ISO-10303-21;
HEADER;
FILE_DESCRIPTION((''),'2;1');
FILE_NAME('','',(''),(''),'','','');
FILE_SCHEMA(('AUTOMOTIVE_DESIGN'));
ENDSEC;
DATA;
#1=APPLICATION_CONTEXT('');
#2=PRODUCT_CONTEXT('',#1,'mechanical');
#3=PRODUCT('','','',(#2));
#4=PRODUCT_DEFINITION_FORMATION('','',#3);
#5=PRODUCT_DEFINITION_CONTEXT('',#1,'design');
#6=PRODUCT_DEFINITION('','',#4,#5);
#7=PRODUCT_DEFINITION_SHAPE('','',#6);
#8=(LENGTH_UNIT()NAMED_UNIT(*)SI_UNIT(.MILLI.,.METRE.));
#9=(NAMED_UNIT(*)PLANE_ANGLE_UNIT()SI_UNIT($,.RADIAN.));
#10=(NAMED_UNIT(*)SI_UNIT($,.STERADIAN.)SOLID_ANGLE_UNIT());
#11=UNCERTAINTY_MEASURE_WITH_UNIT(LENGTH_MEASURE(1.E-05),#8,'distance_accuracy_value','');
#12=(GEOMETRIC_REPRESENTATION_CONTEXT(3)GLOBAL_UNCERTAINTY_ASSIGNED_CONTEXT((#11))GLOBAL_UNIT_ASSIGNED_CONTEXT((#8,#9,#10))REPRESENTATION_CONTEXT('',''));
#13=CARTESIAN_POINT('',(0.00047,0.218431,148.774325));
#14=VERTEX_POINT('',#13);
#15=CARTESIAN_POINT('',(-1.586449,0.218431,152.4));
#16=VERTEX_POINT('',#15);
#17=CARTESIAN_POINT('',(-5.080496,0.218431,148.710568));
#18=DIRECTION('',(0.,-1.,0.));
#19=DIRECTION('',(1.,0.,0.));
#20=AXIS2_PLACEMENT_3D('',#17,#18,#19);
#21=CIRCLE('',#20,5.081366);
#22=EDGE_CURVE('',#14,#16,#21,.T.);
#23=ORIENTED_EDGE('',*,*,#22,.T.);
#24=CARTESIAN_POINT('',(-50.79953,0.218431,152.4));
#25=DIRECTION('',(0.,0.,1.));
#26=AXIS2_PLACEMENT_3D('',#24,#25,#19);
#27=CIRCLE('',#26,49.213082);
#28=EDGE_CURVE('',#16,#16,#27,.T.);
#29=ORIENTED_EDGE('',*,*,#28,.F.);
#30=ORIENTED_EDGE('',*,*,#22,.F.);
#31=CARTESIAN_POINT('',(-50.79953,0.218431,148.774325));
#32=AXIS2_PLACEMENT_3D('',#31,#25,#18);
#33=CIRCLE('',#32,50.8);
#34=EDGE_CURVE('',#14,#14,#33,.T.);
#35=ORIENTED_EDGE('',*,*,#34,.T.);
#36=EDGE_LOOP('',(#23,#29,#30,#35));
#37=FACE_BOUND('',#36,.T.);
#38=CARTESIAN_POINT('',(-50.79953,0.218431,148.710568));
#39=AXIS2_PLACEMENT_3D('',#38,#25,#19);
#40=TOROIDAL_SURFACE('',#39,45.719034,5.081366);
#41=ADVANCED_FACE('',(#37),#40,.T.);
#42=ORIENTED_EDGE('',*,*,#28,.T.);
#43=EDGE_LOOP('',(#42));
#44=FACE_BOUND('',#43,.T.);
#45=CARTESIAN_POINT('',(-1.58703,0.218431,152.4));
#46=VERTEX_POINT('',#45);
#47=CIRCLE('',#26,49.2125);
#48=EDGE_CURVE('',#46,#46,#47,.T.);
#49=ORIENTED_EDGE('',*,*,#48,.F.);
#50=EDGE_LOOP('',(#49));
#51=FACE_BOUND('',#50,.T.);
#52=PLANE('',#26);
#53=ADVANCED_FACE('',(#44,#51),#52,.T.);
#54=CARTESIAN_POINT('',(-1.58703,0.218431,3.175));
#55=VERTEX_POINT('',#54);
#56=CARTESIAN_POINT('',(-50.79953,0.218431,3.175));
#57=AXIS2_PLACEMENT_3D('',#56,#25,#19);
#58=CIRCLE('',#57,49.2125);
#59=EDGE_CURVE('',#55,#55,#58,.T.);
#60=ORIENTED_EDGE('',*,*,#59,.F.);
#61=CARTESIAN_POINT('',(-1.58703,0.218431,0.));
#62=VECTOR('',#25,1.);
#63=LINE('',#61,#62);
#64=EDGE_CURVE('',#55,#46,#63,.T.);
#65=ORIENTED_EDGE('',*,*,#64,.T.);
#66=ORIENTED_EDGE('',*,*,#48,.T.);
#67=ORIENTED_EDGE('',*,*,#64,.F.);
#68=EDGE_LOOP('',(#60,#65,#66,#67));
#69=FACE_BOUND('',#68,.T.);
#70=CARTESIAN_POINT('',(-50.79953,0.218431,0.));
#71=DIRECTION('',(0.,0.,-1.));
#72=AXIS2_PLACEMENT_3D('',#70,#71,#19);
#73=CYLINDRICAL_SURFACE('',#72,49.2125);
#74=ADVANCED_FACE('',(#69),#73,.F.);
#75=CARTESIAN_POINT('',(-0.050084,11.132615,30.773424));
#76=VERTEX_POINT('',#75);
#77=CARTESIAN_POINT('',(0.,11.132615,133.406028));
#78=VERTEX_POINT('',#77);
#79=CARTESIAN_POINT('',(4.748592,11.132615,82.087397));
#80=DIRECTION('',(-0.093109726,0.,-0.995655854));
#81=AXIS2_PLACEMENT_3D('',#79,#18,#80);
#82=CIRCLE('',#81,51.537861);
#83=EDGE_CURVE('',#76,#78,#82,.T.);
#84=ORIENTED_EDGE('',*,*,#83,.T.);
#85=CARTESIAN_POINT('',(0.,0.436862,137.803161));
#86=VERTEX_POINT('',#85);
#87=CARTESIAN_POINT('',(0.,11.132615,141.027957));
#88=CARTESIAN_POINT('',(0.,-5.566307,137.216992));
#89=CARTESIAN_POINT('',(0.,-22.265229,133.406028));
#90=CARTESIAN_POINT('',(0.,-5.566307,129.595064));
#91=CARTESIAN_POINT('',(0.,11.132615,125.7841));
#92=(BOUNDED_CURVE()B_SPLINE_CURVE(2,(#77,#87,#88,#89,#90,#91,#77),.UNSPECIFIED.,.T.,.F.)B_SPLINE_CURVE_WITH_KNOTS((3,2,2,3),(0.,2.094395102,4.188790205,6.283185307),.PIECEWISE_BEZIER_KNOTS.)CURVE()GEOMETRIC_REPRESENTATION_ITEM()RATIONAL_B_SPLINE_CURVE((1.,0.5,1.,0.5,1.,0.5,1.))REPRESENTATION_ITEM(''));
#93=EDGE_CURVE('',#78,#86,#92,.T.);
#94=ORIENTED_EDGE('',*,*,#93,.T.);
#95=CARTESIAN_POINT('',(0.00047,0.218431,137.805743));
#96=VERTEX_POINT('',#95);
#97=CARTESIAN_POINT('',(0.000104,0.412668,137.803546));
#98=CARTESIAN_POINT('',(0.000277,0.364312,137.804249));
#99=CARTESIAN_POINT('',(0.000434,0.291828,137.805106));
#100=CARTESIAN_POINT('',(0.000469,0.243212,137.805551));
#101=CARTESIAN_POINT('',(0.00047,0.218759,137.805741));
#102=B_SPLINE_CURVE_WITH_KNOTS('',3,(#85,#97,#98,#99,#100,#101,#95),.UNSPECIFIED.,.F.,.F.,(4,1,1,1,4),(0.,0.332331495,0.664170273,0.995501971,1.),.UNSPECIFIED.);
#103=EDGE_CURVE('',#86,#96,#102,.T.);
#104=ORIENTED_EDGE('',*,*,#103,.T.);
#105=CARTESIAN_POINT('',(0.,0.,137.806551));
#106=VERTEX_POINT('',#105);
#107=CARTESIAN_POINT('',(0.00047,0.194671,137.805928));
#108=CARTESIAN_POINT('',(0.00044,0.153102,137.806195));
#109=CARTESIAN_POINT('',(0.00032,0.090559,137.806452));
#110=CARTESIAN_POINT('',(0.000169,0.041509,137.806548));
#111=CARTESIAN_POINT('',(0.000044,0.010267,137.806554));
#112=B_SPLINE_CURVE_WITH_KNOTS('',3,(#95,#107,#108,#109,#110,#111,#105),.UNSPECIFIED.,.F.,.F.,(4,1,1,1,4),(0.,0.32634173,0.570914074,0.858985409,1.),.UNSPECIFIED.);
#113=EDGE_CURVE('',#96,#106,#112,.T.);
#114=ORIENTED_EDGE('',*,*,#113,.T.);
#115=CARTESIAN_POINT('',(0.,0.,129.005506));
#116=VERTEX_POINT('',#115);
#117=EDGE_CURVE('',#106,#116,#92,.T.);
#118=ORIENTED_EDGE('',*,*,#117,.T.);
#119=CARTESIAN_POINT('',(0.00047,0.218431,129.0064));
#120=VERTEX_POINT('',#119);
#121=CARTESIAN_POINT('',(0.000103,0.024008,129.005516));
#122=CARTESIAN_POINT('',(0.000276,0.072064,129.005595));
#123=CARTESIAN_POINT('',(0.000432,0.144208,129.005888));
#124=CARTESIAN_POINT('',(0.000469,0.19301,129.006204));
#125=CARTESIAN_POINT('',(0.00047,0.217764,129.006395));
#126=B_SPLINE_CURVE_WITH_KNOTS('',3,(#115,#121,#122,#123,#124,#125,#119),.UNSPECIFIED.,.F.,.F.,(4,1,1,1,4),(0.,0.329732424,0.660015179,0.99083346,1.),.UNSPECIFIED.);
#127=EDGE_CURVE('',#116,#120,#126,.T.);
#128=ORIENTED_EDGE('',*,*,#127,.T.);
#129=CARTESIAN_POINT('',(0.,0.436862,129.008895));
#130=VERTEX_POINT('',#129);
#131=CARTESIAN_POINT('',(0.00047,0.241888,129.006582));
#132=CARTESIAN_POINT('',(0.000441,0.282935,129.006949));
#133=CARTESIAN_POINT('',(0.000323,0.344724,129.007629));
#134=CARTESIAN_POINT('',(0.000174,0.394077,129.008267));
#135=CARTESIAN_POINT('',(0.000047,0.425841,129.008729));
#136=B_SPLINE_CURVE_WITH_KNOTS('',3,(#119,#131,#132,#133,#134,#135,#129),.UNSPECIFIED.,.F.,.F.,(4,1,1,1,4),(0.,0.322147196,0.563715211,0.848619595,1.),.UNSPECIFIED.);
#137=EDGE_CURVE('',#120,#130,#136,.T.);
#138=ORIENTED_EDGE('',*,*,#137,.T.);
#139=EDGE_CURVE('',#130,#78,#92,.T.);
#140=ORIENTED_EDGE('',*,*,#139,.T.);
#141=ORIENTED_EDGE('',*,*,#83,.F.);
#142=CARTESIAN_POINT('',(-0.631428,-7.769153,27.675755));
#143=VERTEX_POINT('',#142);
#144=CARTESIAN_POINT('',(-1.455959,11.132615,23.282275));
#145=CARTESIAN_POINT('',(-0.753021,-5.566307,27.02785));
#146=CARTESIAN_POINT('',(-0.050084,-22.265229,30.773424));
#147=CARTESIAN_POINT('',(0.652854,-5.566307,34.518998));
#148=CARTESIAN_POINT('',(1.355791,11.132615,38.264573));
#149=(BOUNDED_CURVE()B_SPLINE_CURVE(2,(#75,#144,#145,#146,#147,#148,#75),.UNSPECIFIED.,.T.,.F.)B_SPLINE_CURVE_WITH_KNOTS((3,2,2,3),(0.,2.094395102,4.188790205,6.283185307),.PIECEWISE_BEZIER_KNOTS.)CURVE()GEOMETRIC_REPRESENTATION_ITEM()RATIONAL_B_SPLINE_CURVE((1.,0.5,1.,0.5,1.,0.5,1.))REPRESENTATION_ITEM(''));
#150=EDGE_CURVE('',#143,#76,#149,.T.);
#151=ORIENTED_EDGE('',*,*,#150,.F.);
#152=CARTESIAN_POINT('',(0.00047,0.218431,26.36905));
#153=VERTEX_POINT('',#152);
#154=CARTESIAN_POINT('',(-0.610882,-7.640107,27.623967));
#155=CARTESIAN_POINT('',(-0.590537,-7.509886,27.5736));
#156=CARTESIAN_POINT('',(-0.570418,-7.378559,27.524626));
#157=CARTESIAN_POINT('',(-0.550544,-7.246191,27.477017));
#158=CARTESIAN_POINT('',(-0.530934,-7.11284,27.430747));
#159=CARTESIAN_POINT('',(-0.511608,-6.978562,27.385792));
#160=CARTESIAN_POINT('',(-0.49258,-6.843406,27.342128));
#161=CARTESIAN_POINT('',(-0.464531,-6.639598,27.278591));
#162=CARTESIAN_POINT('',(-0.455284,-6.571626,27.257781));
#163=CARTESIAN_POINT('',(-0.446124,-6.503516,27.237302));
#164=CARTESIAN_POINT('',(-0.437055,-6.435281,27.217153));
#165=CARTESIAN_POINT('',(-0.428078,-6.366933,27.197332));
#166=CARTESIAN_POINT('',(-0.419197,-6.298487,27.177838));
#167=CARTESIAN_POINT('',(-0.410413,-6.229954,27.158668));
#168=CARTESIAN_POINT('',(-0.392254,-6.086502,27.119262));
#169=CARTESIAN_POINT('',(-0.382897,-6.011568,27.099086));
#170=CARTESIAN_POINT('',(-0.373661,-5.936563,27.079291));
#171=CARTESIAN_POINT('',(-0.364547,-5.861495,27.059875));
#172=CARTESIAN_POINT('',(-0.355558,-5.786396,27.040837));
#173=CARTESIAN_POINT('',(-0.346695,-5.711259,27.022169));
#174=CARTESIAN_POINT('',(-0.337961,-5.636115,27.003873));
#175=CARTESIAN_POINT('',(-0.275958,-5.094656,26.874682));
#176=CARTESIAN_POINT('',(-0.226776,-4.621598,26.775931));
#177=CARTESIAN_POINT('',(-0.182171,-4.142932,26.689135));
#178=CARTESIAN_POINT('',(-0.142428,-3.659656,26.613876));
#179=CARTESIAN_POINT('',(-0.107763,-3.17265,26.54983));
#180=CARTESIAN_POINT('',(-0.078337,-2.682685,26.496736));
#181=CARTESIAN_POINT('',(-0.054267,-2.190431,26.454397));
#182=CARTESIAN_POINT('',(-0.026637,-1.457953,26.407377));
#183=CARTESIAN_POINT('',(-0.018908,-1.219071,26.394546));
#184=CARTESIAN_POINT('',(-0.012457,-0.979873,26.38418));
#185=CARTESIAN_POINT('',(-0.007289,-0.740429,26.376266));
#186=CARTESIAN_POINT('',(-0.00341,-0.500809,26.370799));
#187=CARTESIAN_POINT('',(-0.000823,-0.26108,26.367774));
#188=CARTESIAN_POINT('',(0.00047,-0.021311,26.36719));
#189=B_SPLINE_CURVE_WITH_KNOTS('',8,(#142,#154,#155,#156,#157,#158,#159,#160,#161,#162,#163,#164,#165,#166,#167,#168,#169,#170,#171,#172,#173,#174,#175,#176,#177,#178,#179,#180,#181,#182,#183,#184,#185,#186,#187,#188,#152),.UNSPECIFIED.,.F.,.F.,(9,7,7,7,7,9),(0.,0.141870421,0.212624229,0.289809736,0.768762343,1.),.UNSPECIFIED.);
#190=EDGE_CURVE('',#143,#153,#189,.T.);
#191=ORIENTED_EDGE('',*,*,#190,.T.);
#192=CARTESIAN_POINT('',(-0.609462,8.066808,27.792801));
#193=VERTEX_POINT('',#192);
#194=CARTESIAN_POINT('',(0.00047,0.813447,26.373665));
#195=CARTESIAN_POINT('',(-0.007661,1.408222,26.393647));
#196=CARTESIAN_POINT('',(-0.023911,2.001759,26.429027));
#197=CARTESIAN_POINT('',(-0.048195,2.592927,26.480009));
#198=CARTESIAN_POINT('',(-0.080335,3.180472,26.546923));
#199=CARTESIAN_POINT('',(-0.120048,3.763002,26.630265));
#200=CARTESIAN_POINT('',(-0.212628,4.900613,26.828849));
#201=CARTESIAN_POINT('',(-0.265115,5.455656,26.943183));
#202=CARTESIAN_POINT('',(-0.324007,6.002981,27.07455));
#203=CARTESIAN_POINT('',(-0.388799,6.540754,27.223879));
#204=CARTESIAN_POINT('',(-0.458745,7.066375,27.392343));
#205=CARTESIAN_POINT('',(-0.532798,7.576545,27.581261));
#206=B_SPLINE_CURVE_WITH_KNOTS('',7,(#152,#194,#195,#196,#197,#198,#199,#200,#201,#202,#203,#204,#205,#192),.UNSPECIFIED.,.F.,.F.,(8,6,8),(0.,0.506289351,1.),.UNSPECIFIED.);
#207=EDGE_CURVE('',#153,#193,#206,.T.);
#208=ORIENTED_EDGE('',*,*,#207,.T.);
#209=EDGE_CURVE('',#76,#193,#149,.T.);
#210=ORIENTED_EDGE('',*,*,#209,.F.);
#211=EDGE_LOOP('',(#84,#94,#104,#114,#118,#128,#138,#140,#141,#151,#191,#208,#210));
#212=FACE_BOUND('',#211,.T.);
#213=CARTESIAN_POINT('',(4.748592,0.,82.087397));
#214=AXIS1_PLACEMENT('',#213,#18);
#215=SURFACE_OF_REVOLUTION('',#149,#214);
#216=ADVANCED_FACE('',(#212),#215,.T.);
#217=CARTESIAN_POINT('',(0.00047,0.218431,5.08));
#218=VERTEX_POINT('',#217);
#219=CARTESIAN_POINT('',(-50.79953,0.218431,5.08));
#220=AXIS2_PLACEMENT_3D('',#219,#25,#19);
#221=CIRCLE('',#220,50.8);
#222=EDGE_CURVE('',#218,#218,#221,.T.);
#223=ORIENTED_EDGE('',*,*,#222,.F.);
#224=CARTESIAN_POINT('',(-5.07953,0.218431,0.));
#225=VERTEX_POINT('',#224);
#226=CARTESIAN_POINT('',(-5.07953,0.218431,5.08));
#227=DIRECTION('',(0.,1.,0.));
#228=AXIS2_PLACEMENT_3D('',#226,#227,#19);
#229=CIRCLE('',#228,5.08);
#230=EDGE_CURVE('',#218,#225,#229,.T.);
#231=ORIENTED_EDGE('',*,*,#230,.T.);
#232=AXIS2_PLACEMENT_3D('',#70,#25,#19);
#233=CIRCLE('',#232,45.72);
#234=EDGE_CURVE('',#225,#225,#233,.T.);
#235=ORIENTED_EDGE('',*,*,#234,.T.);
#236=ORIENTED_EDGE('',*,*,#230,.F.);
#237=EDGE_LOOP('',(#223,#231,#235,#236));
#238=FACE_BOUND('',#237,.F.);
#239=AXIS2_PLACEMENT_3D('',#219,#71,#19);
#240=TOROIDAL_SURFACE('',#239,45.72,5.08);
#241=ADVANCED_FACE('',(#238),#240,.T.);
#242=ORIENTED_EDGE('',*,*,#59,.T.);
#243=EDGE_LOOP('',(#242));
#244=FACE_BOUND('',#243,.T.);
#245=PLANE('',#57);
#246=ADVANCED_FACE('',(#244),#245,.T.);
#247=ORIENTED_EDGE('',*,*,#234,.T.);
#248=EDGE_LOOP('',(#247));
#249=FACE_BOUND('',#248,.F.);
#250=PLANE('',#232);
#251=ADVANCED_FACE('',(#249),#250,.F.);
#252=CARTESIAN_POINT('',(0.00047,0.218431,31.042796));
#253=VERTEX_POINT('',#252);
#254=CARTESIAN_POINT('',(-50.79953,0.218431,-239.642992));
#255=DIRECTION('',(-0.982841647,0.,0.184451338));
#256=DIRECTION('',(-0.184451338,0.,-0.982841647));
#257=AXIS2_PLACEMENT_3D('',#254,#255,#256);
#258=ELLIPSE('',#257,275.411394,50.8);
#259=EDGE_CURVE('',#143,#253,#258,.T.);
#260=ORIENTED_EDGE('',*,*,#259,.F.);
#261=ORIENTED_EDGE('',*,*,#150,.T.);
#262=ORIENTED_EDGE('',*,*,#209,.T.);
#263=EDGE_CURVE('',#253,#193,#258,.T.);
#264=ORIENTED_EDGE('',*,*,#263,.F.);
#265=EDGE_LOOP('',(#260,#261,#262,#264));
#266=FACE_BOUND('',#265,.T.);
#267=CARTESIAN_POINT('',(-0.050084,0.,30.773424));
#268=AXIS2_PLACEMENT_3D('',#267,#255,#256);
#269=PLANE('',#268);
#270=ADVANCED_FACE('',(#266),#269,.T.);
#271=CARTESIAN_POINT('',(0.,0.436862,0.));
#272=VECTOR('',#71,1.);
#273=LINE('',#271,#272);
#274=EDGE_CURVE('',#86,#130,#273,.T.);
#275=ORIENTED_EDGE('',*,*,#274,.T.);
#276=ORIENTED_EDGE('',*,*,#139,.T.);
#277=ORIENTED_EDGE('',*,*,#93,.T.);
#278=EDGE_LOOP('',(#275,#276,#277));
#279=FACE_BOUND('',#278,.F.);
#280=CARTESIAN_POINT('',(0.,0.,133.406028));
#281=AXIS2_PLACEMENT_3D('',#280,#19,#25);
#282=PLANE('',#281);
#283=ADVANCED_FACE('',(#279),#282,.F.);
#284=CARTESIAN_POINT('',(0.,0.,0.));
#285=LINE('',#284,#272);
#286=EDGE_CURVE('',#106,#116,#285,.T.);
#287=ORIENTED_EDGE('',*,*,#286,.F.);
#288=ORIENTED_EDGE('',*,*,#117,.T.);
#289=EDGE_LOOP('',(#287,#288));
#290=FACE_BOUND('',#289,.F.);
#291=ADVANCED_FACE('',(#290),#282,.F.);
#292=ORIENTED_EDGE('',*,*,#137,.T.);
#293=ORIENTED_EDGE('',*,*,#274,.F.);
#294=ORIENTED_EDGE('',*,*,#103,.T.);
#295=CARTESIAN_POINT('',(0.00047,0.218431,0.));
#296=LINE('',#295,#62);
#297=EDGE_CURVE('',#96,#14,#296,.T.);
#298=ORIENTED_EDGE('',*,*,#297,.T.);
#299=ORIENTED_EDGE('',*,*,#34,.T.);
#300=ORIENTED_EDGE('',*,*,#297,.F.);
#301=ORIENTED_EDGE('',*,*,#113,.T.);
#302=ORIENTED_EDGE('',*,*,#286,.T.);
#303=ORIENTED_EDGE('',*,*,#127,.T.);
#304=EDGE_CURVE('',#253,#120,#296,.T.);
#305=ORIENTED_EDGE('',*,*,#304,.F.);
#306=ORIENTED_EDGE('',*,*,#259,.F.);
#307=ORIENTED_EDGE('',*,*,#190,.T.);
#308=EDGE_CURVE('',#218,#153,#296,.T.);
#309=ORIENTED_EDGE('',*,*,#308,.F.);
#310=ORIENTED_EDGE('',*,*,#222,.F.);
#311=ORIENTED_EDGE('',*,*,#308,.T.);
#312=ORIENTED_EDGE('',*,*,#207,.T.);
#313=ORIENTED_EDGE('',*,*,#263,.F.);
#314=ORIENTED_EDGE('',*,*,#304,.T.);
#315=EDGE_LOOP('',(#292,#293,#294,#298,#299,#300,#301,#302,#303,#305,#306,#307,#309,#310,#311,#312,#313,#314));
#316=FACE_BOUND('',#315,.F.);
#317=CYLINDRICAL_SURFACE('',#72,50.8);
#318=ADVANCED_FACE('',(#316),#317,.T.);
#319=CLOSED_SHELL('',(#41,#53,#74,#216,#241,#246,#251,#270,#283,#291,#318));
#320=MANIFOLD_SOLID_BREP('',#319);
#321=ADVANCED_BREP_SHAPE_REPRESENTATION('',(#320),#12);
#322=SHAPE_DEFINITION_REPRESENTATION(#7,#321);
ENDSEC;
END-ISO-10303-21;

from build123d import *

# Parameters (mm, degrees)
F0_R     = 50.8
F0_R_2   = 49.2125
F1_DEPTH = 152.4
F2_DEPTH = 3.175
F7_R     = 5.08


# Not quite as in the source:
# - a fillet or chamfer that OpenCascade refuses, or shapes differently, is made with other operations: its cross-section is extruded or revolved along the edge and cut away or added


with BuildPart() as f1:
    # F0 (on Top) → F1 (new body)
    with BuildSketch(Plane.XY):
        with Locations((-50.7995303897, 0.2184311975)):
            Circle(F0_R)
        with Locations((-50.7995303897, 0.2184311975)):
            Circle(F0_R_2, mode=Mode.SUBTRACT)
    extrude(amount=F1_DEPTH)

    # F0 (on Top) → F2 (join)
    with BuildSketch(Plane.XY):
        with Locations((-50.7995303897, 0.2184311975)):
            Circle(F0_R_2)
    extrude(amount=F2_DEPTH)

    # F5: sweep along a path in F4
    with BuildLine(Plane.XZ) as f5_path:
        ThreePointArc((0, 31.0402940959), (56.0160848718, 82.0873966441), (0, 133.1344991922))
    # F3 (on Right) → F5 (sweep)
    with BuildSketch(Plane.YZ):
        with BuildLine():
            add(Edge.make_bspline(
                [(11.1326146871, 133.4060281515), (11.1326146871, 141.0279565911), (-5.5663073435, 137.2169923713), (-22.2652293742, 133.4060281515), (-5.5663073435, 129.5950639317), (11.1326146871, 125.7840997119), (11.1326146871, 133.4060281515)],
                knots=[0, 0, 0, 2.0943951024, 2.0943951024, 4.1887902048, 4.1887902048, 6.2831853072, 6.2831853072, 6.2831853072], degree=2, weights=[1, 0.5, 1, 0.5, 1, 0.5, 1]))
        make_face()
    sweep(path=f5_path.line)

    # F6: fillet of radius 5.08 on 1 edges, made by hand

    # F6_s1 → F6_t2 (revolve, cut)
    with BuildSketch(Plane.XZ.offset(-0.2184311975)):
        with BuildLine():
            ThreePointArc((0.0008696103, 148.7105678213), (-0.412881514, 150.7189630856), (-1.5867553659, 152.4002904513))
            Line((-1.5867553659, 152.4002904513), (-1.237381295, 152.7692627143))
            ThreePointArc((-1.237381295, 152.7692627143), (-0.7931428778, 152.9081365685), (0.0004696103, 152.9081365685))
            Line((0.0004696103, 152.9081365685), (0.5086061789, 152.4))
            ThreePointArc((0.5086061789, 152.4), (0.5086061789, 150.5552839107), (0.5090061789, 148.7105678213))
            Line((0.5090061789, 148.7105678213), (0.0008696103, 148.7105678213))
        make_face()
    revolve(axis=Axis((-50.7995303897, 0.2184311975, 152.4), (0, 0, 1)), mode=Mode.SUBTRACT)

    # F7
    f7_edges = [f1.edges().sort_by_distance(p)[0] for p in [
        (-101.59953, 0.218431, 0),
    ]]
    fillet(f7_edges, radius=F7_R)


solid = f1.part
